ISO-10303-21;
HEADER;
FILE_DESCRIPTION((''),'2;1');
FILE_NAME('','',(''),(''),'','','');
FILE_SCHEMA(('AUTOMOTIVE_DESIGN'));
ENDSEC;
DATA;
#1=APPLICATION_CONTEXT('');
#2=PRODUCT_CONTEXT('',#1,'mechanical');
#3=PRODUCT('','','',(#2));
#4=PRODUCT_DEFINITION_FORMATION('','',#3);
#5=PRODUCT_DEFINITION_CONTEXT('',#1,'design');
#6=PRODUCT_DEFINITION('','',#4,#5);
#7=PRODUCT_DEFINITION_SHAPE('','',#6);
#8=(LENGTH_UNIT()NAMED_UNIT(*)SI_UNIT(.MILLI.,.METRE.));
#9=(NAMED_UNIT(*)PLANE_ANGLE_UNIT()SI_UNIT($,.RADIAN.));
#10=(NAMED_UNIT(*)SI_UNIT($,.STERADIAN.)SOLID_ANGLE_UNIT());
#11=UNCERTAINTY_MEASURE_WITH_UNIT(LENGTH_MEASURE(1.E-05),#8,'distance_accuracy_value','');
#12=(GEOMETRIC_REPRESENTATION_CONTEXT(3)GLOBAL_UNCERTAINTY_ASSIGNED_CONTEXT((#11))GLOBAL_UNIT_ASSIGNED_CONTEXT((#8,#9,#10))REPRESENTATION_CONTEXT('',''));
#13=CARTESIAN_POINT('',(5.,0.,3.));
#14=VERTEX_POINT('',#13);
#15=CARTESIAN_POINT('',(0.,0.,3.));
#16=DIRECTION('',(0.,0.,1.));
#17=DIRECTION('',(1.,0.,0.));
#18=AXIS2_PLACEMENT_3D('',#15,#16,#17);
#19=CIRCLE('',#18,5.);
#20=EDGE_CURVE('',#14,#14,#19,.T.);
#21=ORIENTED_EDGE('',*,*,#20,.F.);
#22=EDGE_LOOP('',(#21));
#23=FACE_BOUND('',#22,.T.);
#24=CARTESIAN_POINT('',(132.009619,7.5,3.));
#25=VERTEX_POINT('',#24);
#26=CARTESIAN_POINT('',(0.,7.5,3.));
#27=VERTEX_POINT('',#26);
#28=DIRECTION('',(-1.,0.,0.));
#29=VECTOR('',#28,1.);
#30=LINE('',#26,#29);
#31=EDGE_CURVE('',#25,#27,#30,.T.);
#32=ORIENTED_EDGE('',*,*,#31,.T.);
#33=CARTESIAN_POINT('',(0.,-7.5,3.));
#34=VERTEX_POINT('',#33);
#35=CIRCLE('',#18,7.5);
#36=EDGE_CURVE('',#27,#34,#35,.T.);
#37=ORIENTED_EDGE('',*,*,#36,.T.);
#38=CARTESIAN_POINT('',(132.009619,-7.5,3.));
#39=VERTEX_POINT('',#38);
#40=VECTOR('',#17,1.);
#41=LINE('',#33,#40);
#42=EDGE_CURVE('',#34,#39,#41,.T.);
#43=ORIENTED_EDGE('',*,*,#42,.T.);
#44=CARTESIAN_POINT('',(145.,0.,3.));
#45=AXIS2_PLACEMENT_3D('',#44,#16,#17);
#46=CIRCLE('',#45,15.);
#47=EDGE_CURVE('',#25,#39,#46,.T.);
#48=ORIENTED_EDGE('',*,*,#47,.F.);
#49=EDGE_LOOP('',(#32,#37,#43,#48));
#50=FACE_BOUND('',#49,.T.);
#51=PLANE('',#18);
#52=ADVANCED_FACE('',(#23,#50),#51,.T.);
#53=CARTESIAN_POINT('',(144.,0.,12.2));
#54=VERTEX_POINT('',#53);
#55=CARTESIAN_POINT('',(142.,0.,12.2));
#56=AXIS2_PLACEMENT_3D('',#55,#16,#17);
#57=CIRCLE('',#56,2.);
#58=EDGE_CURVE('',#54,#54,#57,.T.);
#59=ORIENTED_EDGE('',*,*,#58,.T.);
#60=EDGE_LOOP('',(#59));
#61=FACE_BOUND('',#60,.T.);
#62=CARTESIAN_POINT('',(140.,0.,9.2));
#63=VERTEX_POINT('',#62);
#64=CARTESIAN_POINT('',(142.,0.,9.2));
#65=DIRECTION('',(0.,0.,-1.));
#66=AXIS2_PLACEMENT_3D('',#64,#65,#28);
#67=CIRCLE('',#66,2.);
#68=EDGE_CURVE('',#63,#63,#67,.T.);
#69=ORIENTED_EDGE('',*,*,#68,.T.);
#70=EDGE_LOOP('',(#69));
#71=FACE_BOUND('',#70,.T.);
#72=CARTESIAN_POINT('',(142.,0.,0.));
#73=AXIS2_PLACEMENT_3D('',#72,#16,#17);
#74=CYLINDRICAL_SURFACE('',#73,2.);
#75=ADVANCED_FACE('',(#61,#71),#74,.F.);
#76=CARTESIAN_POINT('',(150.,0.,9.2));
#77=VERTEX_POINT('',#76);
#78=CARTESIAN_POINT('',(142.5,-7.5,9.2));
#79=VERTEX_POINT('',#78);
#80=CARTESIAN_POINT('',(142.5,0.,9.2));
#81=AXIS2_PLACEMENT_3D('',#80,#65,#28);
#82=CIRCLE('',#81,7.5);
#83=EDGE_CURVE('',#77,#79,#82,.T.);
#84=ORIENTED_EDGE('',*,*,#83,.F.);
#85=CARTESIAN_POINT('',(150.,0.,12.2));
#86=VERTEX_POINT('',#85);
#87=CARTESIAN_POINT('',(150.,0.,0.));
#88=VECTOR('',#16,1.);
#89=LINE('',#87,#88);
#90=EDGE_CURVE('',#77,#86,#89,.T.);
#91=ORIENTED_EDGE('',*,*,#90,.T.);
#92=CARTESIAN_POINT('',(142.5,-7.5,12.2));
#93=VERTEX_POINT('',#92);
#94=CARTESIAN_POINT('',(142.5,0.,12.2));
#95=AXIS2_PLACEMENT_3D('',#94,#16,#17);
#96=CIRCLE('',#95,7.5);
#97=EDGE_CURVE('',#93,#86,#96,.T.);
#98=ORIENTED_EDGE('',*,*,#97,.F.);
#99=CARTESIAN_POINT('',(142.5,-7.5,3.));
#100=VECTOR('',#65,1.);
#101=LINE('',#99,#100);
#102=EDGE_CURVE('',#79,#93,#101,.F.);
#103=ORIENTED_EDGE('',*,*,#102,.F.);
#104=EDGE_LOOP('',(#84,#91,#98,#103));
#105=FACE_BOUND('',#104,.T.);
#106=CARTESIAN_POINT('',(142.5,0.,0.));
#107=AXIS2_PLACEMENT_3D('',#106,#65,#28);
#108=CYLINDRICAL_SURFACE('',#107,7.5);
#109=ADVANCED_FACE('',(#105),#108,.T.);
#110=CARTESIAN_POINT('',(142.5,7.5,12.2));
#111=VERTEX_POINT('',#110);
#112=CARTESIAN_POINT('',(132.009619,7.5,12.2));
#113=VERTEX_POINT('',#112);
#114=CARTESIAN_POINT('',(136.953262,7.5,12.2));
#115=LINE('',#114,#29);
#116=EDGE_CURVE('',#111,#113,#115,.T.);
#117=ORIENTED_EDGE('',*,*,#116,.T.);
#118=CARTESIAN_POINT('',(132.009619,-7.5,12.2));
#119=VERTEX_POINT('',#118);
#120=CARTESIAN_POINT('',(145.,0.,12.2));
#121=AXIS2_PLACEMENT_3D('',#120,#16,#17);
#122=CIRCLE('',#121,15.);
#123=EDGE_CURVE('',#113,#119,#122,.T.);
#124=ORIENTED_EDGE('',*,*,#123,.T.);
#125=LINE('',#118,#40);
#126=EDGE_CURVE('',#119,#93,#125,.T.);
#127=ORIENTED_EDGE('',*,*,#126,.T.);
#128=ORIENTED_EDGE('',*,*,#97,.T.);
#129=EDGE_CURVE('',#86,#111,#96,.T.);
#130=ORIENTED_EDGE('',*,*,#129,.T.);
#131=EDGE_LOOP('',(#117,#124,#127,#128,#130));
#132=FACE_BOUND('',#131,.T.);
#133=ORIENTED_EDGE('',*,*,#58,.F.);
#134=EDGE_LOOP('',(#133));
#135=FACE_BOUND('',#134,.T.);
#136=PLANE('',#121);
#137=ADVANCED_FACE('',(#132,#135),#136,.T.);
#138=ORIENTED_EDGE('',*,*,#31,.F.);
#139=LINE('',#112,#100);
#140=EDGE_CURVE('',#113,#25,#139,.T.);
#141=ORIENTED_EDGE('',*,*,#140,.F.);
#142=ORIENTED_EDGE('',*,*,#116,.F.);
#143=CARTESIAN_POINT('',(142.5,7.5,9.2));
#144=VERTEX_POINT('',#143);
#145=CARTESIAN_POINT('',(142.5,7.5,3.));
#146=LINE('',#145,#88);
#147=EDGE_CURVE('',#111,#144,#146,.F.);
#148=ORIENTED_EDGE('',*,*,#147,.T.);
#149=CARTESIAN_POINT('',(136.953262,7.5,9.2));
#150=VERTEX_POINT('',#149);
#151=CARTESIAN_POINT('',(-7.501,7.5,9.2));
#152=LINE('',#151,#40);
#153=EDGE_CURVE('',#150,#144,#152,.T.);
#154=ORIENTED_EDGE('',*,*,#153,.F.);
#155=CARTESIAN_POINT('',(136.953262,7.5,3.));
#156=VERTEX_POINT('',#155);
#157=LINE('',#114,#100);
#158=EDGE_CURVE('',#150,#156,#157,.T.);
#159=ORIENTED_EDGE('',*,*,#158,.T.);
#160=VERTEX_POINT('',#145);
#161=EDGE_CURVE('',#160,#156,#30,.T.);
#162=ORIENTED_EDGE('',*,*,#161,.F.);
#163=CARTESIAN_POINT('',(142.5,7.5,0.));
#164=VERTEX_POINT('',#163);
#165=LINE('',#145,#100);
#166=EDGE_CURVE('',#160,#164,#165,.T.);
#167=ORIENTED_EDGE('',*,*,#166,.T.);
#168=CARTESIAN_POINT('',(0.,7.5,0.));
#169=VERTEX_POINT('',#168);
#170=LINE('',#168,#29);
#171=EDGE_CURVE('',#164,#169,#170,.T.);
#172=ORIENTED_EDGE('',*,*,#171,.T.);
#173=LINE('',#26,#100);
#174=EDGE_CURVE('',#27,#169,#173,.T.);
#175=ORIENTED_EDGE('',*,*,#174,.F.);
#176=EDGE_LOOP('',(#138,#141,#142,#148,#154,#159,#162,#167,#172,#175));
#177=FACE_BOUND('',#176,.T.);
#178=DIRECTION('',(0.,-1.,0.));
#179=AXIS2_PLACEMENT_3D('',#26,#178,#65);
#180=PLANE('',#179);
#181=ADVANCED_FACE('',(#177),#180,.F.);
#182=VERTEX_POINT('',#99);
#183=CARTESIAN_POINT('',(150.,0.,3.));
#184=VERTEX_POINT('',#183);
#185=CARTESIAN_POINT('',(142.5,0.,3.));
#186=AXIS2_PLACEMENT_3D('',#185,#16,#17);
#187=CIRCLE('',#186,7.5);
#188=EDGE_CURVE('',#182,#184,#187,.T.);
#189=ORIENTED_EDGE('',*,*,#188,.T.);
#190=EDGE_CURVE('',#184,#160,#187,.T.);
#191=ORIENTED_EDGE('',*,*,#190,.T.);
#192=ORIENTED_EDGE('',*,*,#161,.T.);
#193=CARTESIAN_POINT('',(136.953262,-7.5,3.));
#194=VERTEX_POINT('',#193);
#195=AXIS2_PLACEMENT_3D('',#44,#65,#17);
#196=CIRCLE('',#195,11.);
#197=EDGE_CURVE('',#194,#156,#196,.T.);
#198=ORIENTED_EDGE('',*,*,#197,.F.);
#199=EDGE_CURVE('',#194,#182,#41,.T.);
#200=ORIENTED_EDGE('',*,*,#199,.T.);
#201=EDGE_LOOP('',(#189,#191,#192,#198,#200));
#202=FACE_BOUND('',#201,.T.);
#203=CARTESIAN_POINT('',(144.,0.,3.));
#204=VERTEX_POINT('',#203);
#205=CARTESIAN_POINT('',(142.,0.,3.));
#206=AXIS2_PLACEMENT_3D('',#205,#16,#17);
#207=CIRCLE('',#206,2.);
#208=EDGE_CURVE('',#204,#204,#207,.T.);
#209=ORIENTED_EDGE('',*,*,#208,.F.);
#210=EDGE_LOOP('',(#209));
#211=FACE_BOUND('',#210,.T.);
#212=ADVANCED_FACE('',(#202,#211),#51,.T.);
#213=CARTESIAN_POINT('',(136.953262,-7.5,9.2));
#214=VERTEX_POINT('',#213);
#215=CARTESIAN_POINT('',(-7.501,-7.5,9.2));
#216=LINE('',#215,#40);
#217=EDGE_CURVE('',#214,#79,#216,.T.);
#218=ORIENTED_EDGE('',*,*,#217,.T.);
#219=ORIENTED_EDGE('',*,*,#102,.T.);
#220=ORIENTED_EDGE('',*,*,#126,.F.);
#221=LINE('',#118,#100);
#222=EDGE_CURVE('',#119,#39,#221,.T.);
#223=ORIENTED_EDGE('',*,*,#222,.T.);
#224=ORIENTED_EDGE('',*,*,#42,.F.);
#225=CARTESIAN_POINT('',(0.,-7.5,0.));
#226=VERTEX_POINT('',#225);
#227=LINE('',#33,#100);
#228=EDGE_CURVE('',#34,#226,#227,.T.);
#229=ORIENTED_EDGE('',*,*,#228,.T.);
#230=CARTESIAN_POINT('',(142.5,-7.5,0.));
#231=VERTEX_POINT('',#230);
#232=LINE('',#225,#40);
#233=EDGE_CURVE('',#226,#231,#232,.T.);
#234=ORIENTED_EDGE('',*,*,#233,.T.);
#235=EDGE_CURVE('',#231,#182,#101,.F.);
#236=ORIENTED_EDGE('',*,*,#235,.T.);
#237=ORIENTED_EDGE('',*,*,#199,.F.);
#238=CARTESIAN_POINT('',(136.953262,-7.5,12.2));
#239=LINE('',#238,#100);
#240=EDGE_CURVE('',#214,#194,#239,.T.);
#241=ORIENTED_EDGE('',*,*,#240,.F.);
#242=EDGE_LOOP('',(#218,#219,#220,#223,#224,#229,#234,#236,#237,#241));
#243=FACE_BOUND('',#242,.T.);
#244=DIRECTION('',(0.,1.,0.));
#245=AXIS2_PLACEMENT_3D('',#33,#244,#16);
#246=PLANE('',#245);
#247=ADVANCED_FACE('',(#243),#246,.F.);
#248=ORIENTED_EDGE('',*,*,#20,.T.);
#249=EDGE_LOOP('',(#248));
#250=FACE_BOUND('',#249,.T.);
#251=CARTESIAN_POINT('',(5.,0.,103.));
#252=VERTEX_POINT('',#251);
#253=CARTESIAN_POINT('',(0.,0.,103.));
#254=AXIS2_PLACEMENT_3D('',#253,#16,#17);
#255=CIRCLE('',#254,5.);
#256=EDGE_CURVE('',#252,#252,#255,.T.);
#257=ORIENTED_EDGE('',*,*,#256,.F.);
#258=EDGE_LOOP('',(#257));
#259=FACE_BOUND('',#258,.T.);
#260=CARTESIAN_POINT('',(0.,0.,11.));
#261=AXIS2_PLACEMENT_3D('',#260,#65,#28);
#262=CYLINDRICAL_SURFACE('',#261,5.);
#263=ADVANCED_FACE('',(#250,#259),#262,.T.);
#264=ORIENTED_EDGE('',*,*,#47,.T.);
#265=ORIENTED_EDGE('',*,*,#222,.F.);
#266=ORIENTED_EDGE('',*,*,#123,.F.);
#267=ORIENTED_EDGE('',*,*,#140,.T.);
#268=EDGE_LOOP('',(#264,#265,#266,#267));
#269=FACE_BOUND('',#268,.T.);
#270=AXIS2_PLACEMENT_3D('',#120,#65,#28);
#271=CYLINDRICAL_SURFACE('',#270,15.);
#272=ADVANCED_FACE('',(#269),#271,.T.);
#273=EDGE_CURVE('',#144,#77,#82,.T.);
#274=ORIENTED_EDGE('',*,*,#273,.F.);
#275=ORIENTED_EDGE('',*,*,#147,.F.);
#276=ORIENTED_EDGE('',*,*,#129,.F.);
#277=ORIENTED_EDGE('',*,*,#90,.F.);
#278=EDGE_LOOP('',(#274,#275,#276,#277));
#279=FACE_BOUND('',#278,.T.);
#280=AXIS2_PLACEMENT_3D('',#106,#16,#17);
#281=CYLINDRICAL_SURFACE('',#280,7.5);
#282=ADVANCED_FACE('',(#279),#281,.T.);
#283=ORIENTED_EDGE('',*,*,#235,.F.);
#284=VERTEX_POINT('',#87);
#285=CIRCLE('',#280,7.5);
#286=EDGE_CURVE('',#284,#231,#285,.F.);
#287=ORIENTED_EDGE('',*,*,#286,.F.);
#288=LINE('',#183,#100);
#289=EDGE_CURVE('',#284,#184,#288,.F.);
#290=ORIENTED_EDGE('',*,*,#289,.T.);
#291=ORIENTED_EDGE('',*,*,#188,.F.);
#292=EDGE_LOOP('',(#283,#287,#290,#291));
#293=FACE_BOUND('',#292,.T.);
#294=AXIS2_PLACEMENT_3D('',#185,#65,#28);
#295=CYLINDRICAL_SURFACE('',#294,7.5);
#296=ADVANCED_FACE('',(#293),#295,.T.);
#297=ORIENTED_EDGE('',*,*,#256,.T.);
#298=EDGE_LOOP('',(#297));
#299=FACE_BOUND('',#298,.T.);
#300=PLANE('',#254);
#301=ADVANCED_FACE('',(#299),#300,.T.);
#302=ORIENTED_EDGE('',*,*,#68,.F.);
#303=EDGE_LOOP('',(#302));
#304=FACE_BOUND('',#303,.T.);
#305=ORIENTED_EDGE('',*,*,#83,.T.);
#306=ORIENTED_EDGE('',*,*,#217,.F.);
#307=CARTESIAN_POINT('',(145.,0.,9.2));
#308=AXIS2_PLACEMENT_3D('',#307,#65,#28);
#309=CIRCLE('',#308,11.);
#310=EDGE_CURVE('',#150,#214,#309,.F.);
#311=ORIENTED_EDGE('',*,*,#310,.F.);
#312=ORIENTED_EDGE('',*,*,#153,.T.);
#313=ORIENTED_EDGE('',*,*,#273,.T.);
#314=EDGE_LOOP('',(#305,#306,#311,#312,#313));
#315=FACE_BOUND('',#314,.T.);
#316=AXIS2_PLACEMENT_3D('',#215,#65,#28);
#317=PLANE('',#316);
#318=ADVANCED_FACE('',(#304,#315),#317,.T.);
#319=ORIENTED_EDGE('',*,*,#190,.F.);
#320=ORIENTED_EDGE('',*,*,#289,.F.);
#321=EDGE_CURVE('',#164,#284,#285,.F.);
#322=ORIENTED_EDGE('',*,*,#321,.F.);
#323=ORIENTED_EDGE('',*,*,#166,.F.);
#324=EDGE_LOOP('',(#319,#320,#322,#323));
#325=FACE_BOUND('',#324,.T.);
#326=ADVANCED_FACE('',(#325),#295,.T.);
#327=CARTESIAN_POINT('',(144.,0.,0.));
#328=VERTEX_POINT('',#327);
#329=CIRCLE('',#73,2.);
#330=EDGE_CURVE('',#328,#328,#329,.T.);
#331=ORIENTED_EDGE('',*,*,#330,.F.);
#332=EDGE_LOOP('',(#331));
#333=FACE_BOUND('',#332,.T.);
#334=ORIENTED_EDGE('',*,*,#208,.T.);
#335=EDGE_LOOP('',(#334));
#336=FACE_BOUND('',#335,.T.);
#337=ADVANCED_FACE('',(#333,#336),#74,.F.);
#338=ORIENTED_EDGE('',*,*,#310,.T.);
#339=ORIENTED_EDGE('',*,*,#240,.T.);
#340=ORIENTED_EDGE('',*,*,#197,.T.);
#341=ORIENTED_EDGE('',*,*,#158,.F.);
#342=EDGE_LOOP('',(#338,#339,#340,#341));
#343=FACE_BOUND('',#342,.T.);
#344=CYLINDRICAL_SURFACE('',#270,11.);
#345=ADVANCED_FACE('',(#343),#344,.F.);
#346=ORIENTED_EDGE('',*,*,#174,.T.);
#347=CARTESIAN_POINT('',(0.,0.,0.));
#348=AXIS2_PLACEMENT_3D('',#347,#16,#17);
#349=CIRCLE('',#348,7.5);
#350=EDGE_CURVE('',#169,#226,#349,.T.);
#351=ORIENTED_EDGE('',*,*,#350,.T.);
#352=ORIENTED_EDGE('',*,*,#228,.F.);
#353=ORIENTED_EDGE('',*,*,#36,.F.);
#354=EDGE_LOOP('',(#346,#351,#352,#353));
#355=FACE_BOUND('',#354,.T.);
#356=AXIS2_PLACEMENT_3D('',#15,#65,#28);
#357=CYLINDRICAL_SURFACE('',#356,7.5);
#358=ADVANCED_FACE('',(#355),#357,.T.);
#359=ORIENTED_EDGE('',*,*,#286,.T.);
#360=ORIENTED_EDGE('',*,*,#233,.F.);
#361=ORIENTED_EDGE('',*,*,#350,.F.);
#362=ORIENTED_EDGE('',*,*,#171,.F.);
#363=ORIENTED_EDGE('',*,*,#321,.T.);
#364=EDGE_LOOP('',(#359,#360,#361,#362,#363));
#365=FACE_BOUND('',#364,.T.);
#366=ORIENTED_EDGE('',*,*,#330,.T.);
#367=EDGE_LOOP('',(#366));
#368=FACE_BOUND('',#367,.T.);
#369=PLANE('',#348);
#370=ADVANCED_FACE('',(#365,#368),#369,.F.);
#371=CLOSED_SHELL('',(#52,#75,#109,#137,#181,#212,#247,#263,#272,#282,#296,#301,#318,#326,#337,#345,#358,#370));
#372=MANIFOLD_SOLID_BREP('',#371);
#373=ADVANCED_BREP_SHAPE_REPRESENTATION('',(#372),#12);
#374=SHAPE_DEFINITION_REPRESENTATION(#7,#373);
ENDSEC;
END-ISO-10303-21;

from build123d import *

# Parameters (mm, degrees)
BOSS_EXTRUDE1_DEPTH      = 3
SKETCH2_R                = 5
BOSS_EXTRUDE2_DEPTH      = 8
SKETCH3_R                = 5
BOSS_EXTRUDE3_DEPTH      = 92
BOSS_EXTRUDE6_DEPTH      = 9.2
BOSS_EXTRUDE7_REACH      = 190.339
BOSS_EXTRUDE7_END_RADIUS = 11
SKETCH8_W                = 3
SKETCH8_H                = 15
SKETCH9_R                = 2
CUT_EXTRUDE2_DEPTH       = 176.501823352
FILLET2_R                = 7.5


with BuildPart() as part:
    # Sketch1 → Boss-Extrude1 (new body)
    with BuildSketch(Plane.XY):
        with BuildLine():
            Line((0, 7.5), (150, 7.5))
            Line((150, 7.5), (150, -7.5))
            Line((150, -7.5), (0, -7.5))
            ThreePointArc((0, -7.5), (-7.5, 0), (0, 7.5))
        make_face()
    extrude(amount=BOSS_EXTRUDE1_DEPTH)

    # Sketch2 → Boss-Extrude2 (add)
    with BuildSketch(Plane.XY.offset(3)):
        Circle(SKETCH2_R)
    extrude(amount=BOSS_EXTRUDE2_DEPTH)

    # Sketch3 → Boss-Extrude3 (add)
    with BuildSketch(Plane.XY.offset(11)):
        Circle(SKETCH3_R)
    extrude(amount=BOSS_EXTRUDE3_DEPTH)

    # Sketch7 → Boss-Extrude6 (add)
    with BuildSketch(Plane.XY.offset(3)):
        with BuildLine():
            Line((136.95326153, 7.5), (132.009618943, 7.5))
            ThreePointArc((132.009618943, 7.5), (130, 0), (132.009618943, -7.5))
            Line((132.009618943, -7.5), (136.95326153, -7.5))
            ThreePointArc((136.95326153, -7.5), (134, 0), (136.95326153, 7.5))
        make_face()
    extrude(amount=BOSS_EXTRUDE6_DEPTH)

    # Boss-Extrude7: up to this cylinder (the profile starts inside it)
    boss_extrude7_end = Plane(origin=(145, 0, 10.7), z_dir=(0, 0, -1)) * Cylinder(BOSS_EXTRUDE7_END_RADIUS, 403.678, mode=Mode.PRIVATE)
    # Sketch8 → Boss-Extrude7 (add, up to the surface)
    with BuildSketch(Plane(origin=(150, 0, 0), x_dir=(0, 0, -1), z_dir=(1, 0, 0)), mode=Mode.PRIVATE) as boss_extrude7_sk1:
        with Locations((-10.7, 0)):
            Rectangle(SKETCH8_W, SKETCH8_H)
    boss_extrude7_tool1 = extrude(boss_extrude7_sk1.sketch, amount=-BOSS_EXTRUDE7_REACH, mode=Mode.PRIVATE) & boss_extrude7_end
    add(boss_extrude7_tool1.solids().sort_by_distance((150, 0, 10.7))[0])

    # Sketch9 → Cut-Extrude2 (cut, through all)
    with BuildSketch(Plane.XY.offset(12.2)):
        with Locations((142, 0)):
            Circle(SKETCH9_R)
    extrude(amount=-CUT_EXTRUDE2_DEPTH, mode=Mode.SUBTRACT)

    # Fillet2
    fillet2_edges = [part.edges().sort_by_distance(p)[0] for p in [
        (150, -7.5, 1.5),
        (150, -7.5, 10.7),
        (150, 7.5, 1.5),
        (150, 7.5, 10.7),
    ]]
    fillet(fillet2_edges, radius=FILLET2_R - 0.0001)  # a hair under: the kernel refuses the full size


solid = part.part
